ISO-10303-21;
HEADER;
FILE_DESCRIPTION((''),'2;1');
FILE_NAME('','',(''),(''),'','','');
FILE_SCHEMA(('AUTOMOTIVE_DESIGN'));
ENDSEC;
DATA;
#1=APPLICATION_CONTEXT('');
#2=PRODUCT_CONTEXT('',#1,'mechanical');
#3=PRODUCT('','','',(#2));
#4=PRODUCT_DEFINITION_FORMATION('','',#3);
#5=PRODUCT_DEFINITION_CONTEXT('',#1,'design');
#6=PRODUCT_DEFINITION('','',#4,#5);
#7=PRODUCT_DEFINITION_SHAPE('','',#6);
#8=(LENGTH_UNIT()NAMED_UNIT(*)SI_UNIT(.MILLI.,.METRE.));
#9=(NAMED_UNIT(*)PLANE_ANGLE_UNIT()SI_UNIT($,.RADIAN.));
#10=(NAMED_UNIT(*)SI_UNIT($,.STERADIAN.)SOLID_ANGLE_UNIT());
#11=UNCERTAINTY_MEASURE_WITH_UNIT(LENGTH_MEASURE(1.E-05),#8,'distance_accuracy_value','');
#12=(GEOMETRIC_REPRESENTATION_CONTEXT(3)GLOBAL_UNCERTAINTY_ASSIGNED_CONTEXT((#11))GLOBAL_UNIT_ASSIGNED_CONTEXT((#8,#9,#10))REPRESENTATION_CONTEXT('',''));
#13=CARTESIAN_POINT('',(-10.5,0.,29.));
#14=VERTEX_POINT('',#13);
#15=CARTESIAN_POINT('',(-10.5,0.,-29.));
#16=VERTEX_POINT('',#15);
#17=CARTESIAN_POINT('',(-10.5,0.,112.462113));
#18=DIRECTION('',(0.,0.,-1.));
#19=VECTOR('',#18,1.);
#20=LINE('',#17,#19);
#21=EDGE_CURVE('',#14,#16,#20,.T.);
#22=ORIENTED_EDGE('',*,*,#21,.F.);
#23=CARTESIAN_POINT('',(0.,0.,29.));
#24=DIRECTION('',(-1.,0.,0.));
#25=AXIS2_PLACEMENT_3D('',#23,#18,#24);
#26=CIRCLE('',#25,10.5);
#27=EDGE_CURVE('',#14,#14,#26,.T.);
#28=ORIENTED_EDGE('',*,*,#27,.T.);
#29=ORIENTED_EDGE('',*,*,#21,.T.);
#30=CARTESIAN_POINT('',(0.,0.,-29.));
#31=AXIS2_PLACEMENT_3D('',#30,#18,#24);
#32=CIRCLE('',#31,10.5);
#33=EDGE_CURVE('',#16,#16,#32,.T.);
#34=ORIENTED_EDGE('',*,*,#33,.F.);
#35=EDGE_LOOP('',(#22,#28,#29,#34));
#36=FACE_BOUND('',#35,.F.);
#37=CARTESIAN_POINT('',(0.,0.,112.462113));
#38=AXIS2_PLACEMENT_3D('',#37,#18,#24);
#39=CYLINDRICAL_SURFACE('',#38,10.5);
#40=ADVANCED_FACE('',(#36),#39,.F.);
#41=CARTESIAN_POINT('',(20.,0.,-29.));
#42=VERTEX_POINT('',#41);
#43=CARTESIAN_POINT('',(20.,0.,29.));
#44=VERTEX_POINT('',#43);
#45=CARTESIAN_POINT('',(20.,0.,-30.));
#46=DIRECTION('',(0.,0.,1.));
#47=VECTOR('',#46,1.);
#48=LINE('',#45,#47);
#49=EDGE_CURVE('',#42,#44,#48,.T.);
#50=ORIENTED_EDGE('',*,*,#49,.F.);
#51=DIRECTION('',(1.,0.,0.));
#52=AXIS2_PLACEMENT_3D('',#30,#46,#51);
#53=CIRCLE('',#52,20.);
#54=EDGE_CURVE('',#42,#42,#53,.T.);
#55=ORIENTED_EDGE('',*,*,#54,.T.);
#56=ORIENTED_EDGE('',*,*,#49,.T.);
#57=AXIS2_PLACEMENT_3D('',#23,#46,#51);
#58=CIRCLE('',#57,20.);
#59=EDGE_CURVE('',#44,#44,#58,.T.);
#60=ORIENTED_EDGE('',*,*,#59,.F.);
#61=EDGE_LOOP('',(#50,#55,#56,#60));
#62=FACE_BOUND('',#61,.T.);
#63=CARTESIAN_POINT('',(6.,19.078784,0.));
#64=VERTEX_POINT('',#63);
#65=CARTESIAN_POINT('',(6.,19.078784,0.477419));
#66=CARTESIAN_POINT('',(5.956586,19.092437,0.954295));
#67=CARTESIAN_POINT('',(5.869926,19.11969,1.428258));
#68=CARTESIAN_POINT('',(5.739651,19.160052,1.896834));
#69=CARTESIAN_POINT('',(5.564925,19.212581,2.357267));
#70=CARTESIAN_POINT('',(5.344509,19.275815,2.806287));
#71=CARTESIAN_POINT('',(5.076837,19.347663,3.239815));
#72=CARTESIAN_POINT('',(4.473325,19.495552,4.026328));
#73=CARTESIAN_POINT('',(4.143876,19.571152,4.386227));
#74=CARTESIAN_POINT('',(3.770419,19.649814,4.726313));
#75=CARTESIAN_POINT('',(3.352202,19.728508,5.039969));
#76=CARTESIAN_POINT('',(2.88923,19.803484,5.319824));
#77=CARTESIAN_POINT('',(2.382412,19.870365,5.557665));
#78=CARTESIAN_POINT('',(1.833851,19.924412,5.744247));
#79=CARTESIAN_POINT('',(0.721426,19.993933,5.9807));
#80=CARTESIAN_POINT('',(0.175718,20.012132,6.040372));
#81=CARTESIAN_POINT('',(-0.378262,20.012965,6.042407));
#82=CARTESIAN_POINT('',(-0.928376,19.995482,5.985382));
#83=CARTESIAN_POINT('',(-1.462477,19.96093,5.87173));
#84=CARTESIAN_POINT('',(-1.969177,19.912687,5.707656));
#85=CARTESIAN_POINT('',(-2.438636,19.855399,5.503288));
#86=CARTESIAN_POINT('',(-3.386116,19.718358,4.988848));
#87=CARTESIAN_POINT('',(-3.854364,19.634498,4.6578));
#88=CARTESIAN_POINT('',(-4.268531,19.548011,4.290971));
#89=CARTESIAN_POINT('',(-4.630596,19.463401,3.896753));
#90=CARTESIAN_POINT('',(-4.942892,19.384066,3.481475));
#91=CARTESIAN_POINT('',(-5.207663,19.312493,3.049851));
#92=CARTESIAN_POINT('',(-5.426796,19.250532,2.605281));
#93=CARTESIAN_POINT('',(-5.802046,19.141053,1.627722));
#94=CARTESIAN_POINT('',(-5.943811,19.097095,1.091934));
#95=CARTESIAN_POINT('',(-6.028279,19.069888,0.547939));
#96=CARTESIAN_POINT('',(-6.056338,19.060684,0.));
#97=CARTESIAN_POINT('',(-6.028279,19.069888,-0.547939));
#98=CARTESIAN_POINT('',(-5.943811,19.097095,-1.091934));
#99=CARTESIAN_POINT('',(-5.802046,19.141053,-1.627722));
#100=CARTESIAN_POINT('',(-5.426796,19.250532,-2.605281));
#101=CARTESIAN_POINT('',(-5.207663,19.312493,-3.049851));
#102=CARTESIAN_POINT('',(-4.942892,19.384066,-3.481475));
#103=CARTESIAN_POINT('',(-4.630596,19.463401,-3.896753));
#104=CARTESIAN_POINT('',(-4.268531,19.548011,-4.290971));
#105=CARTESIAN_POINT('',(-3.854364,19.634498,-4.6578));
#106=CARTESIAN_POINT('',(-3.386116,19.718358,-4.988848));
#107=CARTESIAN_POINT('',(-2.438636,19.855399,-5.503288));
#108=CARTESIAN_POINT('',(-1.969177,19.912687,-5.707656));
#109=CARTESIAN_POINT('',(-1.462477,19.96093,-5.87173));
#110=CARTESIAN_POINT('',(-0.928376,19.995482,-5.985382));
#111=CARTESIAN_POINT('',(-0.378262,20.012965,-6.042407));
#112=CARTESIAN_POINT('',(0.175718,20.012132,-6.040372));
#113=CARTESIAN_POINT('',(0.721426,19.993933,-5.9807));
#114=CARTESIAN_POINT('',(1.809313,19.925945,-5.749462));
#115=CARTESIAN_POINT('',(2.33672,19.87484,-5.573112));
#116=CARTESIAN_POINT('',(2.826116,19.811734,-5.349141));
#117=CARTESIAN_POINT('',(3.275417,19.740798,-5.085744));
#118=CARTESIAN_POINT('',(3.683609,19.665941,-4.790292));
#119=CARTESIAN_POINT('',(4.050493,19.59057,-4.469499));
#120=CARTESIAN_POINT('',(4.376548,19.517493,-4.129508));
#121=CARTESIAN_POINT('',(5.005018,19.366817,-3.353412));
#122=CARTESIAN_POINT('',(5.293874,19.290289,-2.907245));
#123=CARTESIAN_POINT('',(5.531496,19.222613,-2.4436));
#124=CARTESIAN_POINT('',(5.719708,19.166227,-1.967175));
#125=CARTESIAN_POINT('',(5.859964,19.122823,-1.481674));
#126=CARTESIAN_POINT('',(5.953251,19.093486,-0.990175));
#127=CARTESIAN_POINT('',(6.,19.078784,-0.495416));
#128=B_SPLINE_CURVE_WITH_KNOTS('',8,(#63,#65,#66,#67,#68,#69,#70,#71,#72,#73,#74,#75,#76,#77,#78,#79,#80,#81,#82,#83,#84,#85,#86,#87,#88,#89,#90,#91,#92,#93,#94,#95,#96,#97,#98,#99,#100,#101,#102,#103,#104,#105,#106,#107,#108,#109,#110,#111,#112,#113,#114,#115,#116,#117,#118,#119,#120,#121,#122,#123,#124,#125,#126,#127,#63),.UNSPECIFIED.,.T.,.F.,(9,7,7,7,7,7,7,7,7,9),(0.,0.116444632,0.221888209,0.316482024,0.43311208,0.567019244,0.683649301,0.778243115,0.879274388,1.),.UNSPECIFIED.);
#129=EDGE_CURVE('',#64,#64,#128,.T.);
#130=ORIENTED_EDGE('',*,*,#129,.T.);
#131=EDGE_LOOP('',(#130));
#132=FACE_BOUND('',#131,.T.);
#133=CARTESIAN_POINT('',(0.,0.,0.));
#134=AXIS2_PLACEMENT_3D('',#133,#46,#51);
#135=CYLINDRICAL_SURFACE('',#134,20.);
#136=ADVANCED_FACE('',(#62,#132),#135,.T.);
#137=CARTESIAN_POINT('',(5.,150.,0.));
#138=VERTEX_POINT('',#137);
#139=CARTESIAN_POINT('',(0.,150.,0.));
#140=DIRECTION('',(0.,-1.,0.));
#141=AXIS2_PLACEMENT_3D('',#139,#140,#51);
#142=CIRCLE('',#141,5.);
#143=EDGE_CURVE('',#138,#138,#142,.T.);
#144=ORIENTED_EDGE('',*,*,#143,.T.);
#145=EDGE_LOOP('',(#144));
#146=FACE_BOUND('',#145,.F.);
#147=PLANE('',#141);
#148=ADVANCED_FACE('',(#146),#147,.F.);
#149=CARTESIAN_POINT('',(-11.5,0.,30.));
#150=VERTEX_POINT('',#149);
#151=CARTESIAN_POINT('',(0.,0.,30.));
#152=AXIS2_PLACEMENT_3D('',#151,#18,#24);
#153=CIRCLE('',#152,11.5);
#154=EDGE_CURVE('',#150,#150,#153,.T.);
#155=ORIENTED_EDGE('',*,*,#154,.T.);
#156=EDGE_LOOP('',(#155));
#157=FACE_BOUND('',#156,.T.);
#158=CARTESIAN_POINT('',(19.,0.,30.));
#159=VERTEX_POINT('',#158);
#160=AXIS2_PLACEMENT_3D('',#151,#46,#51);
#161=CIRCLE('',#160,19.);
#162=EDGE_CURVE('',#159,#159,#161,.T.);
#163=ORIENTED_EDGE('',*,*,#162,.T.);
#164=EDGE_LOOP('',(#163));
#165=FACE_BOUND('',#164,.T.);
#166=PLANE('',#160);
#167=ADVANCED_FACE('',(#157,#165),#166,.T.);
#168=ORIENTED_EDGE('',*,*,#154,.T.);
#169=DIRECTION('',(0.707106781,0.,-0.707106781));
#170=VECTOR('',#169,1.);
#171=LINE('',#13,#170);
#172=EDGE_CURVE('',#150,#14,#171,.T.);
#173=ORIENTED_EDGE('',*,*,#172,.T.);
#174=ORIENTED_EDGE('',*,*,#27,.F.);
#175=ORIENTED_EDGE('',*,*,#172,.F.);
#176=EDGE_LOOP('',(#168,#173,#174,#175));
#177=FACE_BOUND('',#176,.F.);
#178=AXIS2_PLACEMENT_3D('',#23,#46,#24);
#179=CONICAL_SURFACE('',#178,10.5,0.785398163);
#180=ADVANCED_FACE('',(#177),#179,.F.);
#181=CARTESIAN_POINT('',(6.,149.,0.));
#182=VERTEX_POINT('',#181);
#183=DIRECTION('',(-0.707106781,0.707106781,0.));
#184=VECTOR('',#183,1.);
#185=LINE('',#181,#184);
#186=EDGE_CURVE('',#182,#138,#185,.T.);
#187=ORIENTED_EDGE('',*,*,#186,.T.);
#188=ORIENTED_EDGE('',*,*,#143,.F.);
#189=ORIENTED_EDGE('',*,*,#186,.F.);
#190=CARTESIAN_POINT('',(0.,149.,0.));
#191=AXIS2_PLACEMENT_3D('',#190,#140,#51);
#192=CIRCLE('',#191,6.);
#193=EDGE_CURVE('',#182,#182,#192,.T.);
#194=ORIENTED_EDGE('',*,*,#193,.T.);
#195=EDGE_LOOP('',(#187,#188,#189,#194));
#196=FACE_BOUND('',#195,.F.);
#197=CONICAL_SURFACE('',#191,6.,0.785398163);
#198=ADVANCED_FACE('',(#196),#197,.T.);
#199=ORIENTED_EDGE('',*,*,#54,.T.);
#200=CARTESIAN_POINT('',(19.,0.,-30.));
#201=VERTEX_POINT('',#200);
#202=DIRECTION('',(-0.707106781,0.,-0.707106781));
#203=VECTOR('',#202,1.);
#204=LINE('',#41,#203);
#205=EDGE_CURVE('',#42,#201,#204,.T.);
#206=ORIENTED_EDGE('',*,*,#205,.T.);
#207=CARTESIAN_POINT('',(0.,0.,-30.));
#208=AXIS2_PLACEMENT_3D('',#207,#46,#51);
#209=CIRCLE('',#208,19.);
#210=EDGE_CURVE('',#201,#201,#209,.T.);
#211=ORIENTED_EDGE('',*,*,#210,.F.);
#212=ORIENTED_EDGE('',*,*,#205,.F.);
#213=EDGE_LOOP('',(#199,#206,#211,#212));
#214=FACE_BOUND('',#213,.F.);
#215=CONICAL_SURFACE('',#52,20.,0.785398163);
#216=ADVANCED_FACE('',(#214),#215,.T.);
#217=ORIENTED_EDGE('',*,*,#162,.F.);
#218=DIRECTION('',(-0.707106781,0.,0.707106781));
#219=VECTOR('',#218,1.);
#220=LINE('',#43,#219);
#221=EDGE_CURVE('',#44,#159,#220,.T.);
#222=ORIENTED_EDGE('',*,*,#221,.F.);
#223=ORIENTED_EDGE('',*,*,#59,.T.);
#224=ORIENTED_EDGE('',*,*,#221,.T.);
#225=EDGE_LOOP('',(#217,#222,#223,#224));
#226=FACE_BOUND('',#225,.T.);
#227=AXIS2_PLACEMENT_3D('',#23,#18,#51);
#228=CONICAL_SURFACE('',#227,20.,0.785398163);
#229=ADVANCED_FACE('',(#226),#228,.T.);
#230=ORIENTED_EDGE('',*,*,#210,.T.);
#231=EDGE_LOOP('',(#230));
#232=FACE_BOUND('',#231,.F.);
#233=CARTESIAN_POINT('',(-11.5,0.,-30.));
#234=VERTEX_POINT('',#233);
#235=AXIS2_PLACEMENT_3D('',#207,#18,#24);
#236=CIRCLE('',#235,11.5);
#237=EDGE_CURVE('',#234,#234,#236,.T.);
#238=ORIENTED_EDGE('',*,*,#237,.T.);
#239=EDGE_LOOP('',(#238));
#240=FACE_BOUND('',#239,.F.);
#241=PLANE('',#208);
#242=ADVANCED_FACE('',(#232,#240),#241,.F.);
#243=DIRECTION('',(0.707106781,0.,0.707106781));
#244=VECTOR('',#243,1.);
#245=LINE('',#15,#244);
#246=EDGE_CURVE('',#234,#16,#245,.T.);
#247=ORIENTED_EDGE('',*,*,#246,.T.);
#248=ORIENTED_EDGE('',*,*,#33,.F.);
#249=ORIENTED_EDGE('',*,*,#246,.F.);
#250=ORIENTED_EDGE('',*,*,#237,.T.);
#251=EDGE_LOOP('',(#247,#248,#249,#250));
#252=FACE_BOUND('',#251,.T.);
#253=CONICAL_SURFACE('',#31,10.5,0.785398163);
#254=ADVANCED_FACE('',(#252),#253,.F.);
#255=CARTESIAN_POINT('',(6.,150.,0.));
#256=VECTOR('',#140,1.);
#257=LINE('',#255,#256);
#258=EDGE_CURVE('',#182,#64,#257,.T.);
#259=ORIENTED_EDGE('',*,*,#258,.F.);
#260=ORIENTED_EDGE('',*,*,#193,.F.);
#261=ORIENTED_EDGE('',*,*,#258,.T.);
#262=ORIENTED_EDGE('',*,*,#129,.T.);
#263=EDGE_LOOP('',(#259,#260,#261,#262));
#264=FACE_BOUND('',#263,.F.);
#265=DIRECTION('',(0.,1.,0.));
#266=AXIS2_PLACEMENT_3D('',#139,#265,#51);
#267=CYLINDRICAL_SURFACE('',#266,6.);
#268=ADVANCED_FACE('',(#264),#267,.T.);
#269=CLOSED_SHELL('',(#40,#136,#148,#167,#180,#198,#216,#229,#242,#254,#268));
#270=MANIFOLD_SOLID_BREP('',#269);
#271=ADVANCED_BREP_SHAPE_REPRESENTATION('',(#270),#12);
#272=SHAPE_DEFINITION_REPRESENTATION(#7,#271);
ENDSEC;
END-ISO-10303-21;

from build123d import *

# Parameters (mm, degrees)
F0_R     = 20
F1_DEPTH = 30
F3_D     = 21
F5_R     = 6
F7_SIZE  = 1


with BuildPart() as f1:
    # F0 (on Top) → F1 (new body, symmetric)
    with BuildSketch(Plane.XY):
        Circle(F0_R)
    extrude(amount=F1_DEPTH, both=True)

    # F3 (through all)
    with Locations(Plane.XY.offset(30)):
        with Locations((0, 0)):
            Hole(F3_D / 2)

    # F5 (on offset) → F6 (join, up to the next surface of F1)
    with BuildSketch(Plane.XZ.offset(-150)):
        Circle(F5_R)
    extrude(until=Until.NEXT)

    # F7
    f7_edges = [f1.edges().sort_by_distance(p)[0] for p in [
        (-6, 150, 0),
        (-20, 0, 30),
        (-20, 0, -30),
        (-10.5, 0, 30),
        (-10.5, 0, -30),
    ]]
    chamfer(f7_edges, length=F7_SIZE)


solid = f1.part
